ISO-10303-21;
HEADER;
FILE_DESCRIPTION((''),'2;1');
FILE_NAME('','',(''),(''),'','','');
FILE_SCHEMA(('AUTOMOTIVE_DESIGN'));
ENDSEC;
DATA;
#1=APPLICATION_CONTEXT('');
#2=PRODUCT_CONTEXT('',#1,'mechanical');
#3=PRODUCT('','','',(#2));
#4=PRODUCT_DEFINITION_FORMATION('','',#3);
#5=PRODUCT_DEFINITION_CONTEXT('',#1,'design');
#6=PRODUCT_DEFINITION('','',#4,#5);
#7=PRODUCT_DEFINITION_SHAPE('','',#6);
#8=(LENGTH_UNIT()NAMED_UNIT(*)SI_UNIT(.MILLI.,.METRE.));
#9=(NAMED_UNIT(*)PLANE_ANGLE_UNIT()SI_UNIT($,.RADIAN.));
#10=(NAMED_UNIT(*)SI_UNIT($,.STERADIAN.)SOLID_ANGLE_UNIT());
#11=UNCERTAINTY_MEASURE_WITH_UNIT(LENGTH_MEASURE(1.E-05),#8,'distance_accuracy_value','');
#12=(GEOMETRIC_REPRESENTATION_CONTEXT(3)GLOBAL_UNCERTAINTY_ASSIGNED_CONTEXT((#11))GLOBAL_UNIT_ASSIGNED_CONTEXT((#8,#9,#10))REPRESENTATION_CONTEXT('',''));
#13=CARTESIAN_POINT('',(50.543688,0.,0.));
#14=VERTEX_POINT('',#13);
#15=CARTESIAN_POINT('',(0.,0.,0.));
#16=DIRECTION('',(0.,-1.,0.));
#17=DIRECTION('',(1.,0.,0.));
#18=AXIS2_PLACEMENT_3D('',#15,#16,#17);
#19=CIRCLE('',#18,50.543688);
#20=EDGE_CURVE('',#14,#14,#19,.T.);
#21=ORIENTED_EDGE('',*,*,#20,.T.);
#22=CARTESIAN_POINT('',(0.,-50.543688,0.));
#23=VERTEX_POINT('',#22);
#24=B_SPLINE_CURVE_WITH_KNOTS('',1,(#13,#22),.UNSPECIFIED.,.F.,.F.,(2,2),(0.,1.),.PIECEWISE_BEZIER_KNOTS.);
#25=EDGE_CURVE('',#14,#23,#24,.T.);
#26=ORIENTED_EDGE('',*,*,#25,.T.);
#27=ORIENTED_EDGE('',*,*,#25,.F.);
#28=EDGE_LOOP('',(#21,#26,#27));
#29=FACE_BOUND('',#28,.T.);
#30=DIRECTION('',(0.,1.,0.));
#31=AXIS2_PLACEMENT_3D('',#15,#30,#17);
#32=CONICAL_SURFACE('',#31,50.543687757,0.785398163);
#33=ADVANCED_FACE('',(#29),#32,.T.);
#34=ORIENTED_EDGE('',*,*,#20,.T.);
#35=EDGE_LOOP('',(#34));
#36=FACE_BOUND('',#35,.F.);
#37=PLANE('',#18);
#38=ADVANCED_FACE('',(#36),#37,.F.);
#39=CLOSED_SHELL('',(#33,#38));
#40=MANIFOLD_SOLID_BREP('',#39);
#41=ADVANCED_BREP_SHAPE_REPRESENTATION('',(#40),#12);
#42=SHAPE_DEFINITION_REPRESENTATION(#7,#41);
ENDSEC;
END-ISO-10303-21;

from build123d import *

# Parameters (mm, degrees)
F0_R = 50.543687757


# Not quite as in the source:
# - an extrude whose draft closes it to a point is written as a loft to that point


with BuildPart() as f1:
    # F0 (on Front) → F1 section 0
    with BuildSketch(Plane.XZ, mode=Mode.PRIVATE) as f1_s0:
        Circle(F0_R)
    loft([f1_s0.sketch, Vertex(0, -50.543687757, 0)], ruled=True)


solid = f1.part
